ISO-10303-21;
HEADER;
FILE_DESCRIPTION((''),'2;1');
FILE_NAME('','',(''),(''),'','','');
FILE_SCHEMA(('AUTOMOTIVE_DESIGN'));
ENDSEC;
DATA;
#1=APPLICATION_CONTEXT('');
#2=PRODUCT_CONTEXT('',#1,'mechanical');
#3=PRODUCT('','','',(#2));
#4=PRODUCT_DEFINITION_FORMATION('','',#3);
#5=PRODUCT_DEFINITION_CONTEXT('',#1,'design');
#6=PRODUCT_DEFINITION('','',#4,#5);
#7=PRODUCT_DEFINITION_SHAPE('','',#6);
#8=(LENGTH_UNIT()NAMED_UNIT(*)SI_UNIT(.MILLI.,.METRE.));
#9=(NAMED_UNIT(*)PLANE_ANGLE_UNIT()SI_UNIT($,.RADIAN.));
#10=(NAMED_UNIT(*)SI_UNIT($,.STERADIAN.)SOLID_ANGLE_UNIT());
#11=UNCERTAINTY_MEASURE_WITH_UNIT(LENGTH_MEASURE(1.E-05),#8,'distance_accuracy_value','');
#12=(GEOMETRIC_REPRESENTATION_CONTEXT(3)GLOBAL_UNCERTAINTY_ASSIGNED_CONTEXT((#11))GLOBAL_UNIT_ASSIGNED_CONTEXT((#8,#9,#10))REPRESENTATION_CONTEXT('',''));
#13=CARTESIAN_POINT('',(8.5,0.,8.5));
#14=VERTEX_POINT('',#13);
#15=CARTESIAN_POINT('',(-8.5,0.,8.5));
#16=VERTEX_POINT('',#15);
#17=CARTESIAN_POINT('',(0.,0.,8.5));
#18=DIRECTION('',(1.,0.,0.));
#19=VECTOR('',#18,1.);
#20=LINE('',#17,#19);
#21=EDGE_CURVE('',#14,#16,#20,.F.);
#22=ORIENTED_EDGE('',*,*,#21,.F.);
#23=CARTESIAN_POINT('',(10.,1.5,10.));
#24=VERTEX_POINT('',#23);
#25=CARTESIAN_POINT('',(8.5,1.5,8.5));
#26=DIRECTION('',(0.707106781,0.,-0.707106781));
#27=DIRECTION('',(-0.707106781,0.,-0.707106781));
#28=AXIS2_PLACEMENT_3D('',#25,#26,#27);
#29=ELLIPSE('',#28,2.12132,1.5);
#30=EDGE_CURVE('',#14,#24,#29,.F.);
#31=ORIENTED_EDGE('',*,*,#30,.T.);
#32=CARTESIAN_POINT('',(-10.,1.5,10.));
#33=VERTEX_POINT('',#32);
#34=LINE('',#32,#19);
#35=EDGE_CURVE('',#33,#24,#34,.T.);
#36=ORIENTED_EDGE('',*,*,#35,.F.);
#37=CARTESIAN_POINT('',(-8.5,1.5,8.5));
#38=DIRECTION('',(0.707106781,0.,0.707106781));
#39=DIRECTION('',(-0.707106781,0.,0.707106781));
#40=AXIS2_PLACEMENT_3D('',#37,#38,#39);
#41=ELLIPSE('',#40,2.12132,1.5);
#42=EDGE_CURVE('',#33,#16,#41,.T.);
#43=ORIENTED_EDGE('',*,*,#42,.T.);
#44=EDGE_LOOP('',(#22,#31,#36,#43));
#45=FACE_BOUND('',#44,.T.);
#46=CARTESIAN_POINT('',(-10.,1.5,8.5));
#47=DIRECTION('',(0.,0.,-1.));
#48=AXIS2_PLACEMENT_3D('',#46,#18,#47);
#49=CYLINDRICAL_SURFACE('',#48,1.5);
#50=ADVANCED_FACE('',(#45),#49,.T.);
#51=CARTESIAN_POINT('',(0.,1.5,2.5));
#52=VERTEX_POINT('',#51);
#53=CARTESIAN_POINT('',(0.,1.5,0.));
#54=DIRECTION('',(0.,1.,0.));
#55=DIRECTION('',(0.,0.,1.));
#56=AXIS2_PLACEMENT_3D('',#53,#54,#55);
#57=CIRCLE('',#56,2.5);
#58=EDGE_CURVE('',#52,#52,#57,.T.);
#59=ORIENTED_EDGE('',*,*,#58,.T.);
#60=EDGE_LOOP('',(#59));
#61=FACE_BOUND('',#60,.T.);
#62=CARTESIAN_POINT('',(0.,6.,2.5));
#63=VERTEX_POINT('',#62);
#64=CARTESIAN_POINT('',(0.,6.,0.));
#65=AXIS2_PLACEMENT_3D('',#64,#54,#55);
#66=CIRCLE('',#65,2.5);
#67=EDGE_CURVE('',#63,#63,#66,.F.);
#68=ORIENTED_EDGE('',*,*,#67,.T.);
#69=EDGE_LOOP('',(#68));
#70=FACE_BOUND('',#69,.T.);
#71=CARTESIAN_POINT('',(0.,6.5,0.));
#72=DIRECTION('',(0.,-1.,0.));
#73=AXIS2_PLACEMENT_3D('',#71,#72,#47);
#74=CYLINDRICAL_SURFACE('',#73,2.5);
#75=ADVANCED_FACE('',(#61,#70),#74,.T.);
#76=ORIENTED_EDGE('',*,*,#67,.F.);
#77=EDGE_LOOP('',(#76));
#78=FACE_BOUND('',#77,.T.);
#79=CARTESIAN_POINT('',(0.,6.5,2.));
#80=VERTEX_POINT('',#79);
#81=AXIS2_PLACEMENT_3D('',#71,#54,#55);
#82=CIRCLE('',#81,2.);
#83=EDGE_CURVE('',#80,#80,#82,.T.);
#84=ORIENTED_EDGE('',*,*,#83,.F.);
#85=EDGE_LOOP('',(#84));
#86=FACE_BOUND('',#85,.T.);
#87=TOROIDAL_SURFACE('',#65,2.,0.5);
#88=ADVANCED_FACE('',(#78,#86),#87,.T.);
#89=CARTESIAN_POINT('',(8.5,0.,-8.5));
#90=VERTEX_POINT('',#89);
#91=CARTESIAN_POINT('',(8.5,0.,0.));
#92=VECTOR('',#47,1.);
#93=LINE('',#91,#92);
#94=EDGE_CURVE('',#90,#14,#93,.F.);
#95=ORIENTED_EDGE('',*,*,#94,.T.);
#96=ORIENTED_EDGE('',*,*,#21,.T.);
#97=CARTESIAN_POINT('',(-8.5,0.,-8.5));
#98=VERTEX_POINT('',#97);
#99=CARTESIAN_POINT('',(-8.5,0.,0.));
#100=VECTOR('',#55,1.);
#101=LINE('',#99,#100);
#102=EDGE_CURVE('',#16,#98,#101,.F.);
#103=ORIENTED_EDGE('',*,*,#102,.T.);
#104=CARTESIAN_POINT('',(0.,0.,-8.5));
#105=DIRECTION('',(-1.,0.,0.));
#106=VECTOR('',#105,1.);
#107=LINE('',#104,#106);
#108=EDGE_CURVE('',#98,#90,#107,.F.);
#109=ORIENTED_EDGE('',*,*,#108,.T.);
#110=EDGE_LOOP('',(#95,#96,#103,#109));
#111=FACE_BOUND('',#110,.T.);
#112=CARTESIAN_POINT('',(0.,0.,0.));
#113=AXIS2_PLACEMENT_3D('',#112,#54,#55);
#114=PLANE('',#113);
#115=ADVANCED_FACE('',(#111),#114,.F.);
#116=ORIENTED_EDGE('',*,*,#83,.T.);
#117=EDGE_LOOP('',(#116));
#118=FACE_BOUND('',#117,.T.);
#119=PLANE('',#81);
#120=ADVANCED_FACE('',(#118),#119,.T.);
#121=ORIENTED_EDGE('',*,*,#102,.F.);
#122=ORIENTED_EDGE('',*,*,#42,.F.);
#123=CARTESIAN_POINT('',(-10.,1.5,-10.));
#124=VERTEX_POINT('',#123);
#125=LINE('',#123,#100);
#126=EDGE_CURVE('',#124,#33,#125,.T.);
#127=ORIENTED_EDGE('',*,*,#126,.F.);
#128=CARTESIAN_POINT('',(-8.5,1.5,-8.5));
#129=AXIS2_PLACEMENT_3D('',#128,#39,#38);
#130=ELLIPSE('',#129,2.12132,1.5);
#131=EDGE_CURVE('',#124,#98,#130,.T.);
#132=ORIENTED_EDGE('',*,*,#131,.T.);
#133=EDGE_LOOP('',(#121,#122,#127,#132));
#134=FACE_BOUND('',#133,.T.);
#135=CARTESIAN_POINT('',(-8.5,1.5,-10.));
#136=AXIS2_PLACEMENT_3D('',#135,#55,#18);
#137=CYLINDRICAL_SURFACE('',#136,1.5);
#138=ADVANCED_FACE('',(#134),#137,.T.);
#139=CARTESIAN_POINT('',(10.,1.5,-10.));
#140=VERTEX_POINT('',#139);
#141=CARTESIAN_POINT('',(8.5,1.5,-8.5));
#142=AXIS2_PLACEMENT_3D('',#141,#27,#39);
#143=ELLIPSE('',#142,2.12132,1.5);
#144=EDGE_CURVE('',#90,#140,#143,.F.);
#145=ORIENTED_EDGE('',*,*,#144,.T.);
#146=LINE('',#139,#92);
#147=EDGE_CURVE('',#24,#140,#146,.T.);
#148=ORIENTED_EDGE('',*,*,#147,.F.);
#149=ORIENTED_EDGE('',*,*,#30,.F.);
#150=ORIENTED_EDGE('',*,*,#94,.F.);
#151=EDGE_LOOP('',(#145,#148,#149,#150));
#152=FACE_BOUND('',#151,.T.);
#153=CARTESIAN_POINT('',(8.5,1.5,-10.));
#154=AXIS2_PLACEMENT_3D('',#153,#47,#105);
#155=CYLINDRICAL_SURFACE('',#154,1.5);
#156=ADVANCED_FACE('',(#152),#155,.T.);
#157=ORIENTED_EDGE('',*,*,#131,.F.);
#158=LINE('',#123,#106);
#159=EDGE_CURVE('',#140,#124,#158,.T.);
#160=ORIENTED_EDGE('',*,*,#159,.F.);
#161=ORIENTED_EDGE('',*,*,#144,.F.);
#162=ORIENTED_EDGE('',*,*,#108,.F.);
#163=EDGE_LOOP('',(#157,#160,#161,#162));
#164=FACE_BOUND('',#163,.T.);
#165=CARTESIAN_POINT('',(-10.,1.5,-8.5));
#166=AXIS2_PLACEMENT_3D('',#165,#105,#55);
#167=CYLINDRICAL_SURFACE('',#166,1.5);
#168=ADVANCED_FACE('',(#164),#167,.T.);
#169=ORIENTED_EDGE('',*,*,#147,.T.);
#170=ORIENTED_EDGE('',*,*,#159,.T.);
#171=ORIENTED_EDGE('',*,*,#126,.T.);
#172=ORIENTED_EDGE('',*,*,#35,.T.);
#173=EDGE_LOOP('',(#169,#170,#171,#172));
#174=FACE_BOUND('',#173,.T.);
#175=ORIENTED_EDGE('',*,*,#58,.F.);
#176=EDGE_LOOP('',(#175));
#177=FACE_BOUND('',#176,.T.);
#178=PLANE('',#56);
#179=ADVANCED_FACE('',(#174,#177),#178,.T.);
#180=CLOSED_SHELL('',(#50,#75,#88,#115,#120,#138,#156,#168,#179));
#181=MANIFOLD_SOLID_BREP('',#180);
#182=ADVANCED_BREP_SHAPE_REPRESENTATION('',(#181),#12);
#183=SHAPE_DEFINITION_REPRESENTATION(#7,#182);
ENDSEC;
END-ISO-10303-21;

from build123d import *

# Parameters (mm, degrees)
SKETCH_1_W      = 20
SKETCH_1_H      = 20
EXTRUDE_1_DEPTH = 1.5
SKETCH_2_R      = 2.5
EXTRUDE_2_DEPTH = 5
FILLET_1_R      = 1.5
FILLET_2_R      = 0.5


with BuildPart() as part:
    # 草图1 → 凸台-拉伸1 (new body)
    with BuildSketch(Plane(origin=(0, 0, 0), x_dir=(1, 0, 0), z_dir=(0, 1, 0))):
        Rectangle(SKETCH_1_W, SKETCH_1_H)
    extrude(amount=EXTRUDE_1_DEPTH)

    # 草图2 → 凸台-拉伸2 (add)
    with BuildSketch(Plane(origin=(0, 1.5, 0), x_dir=(1, 0, 0), z_dir=(0, 1, 0))):
        with Locations(Location((0, 0, 0), (0, 0, 270))):
            Circle(SKETCH_2_R)
    extrude(amount=EXTRUDE_2_DEPTH)

    # 圆角1
    fillet_1_edges = [part.edges().sort_by_distance(p)[0] for p in [
        (0, 0, 10),
        (10, 0, 0),
        (0, 0, -10),
        (-10, 0, 0),
    ]]
    fillet(fillet_1_edges, radius=FILLET_1_R - 0.0001)  # a hair under: the kernel refuses the full size

    # 圆角2
    fillet_2_edges = [part.edges().sort_by_distance(p)[0] for p in [
        (0, 6.5, -2.5),
    ]]
    fillet(fillet_2_edges, radius=FILLET_2_R)


solid = part.part
